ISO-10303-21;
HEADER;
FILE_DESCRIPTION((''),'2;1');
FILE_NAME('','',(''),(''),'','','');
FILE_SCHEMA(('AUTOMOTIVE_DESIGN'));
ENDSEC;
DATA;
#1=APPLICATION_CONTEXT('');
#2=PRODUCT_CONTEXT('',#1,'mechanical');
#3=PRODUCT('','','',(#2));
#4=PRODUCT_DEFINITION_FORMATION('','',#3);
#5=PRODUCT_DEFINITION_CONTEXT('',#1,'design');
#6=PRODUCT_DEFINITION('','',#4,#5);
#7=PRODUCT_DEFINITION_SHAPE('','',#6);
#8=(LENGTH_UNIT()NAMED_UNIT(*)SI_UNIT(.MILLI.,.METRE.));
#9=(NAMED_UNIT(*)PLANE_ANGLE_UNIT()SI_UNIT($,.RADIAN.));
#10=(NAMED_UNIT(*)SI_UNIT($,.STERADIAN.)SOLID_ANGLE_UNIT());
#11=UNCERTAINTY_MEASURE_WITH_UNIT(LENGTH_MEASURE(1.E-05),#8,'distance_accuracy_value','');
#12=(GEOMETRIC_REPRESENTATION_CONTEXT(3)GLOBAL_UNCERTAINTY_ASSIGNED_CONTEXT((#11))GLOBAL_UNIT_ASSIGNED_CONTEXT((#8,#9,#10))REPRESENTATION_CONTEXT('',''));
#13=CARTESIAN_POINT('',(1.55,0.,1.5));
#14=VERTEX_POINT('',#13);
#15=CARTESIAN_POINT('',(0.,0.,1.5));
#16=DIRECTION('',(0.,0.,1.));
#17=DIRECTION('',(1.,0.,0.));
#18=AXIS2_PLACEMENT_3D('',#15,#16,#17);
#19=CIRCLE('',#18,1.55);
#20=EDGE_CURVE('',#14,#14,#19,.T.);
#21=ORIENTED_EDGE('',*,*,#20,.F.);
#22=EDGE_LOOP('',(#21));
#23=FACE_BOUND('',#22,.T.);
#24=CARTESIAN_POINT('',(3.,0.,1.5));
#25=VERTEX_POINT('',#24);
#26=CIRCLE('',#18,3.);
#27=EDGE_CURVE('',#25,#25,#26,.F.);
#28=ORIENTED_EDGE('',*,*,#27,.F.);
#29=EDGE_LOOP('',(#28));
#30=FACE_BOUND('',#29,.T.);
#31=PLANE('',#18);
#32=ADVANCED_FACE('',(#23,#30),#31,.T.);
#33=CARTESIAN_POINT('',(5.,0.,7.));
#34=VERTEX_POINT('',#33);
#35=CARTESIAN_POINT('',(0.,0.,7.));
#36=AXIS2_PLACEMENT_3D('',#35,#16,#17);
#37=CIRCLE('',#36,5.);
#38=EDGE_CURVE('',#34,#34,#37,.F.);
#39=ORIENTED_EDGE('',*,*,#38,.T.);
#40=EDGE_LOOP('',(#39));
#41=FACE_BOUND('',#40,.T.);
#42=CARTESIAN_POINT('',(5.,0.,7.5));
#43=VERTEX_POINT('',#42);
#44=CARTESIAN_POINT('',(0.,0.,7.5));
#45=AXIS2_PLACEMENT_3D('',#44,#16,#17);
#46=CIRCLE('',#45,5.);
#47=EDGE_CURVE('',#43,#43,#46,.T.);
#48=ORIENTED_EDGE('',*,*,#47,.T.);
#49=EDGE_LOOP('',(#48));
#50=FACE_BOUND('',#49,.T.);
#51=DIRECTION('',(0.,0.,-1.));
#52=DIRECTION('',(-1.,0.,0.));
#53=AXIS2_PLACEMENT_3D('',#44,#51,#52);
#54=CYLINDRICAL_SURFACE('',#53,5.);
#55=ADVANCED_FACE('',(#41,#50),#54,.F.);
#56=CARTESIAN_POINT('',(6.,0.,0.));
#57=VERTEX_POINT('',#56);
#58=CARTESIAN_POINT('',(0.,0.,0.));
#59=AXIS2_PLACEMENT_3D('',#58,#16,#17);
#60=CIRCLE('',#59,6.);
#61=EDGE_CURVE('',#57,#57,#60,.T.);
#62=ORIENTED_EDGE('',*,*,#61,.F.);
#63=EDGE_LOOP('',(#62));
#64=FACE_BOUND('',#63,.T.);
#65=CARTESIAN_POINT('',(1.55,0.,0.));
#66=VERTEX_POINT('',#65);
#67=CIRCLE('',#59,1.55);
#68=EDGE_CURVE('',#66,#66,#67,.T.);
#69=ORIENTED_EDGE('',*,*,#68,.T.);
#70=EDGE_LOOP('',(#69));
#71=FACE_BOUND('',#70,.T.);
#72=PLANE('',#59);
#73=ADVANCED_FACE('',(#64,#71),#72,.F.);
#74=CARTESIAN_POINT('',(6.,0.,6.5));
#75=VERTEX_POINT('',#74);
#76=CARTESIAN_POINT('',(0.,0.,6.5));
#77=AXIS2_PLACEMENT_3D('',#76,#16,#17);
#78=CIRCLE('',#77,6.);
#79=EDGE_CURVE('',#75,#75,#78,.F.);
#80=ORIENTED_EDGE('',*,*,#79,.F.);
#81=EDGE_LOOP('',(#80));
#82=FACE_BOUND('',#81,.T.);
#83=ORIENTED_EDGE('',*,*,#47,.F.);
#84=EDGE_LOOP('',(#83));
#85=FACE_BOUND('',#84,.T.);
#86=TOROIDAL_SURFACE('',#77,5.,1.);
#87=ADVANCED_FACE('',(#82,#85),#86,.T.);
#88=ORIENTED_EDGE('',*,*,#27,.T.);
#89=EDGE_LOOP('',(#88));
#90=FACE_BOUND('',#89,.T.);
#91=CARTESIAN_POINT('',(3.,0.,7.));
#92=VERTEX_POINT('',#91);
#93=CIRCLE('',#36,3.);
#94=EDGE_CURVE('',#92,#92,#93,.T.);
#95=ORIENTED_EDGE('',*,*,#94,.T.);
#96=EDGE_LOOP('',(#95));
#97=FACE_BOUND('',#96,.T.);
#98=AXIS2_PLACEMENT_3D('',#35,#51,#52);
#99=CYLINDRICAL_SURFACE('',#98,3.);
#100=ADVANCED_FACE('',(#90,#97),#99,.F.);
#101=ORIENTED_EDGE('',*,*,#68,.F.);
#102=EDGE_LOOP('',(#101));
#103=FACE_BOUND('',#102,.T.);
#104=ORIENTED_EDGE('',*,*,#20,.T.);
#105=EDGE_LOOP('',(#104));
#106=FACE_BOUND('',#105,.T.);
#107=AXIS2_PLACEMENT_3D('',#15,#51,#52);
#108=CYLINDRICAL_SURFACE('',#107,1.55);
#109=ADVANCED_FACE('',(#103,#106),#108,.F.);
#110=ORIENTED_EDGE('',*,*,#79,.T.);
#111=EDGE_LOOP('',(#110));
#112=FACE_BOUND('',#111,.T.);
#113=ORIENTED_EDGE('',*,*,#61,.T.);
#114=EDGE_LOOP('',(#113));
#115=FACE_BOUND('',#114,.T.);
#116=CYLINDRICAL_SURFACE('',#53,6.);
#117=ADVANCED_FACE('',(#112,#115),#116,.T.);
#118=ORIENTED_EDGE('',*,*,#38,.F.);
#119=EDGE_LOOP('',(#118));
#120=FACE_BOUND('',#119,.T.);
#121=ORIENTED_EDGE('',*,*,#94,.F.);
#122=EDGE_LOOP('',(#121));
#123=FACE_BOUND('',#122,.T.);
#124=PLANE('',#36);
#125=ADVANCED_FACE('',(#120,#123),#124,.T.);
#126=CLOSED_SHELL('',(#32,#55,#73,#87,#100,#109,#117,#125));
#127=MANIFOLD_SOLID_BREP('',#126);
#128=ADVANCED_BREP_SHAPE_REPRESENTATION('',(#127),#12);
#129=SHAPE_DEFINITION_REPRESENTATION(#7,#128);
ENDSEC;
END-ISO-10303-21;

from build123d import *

# Parameters (mm, degrees)
SKETCH1_R           = 3
SKETCH1_R_2         = 1.55
BOSS_EXTRUDE1_DEPTH = 1.5
SKETCH1_7_R         = 5
SKETCH1_7_R_2       = 3
BOSS_EXTRUDE3_DEPTH = 7
SKETCH1_9_R         = 6
SKETCH1_9_R_2       = 5
BOSS_EXTRUDE4_DEPTH = 7.5
FILLET1_R           = 1


with BuildPart() as part:
    # Sketch1 → Boss-Extrude1 (new body)
    with BuildSketch(Plane.XY):
        Circle(SKETCH1_R)
        Circle(SKETCH1_R_2, mode=Mode.SUBTRACT)
    extrude(amount=BOSS_EXTRUDE1_DEPTH)

    # Sketch1<7> → Boss-Extrude3 (add)
    with BuildSketch(Plane.XY):
        Circle(SKETCH1_7_R)
        Circle(SKETCH1_7_R_2, mode=Mode.SUBTRACT)
    extrude(amount=BOSS_EXTRUDE3_DEPTH)

    # Sketch1<9> → Boss-Extrude4 (add)
    with BuildSketch(Plane.XY):
        Circle(SKETCH1_9_R)
        Circle(SKETCH1_9_R_2, mode=Mode.SUBTRACT)
    extrude(amount=BOSS_EXTRUDE4_DEPTH)

    # Fillet1
    fillet1_edges = [part.edges().sort_by_distance(p)[0] for p in [
        (-6, 0, 7.5),
    ]]
    fillet(fillet1_edges, radius=FILLET1_R - 0.0001)  # a hair under: the kernel refuses the full size


solid = part.part
